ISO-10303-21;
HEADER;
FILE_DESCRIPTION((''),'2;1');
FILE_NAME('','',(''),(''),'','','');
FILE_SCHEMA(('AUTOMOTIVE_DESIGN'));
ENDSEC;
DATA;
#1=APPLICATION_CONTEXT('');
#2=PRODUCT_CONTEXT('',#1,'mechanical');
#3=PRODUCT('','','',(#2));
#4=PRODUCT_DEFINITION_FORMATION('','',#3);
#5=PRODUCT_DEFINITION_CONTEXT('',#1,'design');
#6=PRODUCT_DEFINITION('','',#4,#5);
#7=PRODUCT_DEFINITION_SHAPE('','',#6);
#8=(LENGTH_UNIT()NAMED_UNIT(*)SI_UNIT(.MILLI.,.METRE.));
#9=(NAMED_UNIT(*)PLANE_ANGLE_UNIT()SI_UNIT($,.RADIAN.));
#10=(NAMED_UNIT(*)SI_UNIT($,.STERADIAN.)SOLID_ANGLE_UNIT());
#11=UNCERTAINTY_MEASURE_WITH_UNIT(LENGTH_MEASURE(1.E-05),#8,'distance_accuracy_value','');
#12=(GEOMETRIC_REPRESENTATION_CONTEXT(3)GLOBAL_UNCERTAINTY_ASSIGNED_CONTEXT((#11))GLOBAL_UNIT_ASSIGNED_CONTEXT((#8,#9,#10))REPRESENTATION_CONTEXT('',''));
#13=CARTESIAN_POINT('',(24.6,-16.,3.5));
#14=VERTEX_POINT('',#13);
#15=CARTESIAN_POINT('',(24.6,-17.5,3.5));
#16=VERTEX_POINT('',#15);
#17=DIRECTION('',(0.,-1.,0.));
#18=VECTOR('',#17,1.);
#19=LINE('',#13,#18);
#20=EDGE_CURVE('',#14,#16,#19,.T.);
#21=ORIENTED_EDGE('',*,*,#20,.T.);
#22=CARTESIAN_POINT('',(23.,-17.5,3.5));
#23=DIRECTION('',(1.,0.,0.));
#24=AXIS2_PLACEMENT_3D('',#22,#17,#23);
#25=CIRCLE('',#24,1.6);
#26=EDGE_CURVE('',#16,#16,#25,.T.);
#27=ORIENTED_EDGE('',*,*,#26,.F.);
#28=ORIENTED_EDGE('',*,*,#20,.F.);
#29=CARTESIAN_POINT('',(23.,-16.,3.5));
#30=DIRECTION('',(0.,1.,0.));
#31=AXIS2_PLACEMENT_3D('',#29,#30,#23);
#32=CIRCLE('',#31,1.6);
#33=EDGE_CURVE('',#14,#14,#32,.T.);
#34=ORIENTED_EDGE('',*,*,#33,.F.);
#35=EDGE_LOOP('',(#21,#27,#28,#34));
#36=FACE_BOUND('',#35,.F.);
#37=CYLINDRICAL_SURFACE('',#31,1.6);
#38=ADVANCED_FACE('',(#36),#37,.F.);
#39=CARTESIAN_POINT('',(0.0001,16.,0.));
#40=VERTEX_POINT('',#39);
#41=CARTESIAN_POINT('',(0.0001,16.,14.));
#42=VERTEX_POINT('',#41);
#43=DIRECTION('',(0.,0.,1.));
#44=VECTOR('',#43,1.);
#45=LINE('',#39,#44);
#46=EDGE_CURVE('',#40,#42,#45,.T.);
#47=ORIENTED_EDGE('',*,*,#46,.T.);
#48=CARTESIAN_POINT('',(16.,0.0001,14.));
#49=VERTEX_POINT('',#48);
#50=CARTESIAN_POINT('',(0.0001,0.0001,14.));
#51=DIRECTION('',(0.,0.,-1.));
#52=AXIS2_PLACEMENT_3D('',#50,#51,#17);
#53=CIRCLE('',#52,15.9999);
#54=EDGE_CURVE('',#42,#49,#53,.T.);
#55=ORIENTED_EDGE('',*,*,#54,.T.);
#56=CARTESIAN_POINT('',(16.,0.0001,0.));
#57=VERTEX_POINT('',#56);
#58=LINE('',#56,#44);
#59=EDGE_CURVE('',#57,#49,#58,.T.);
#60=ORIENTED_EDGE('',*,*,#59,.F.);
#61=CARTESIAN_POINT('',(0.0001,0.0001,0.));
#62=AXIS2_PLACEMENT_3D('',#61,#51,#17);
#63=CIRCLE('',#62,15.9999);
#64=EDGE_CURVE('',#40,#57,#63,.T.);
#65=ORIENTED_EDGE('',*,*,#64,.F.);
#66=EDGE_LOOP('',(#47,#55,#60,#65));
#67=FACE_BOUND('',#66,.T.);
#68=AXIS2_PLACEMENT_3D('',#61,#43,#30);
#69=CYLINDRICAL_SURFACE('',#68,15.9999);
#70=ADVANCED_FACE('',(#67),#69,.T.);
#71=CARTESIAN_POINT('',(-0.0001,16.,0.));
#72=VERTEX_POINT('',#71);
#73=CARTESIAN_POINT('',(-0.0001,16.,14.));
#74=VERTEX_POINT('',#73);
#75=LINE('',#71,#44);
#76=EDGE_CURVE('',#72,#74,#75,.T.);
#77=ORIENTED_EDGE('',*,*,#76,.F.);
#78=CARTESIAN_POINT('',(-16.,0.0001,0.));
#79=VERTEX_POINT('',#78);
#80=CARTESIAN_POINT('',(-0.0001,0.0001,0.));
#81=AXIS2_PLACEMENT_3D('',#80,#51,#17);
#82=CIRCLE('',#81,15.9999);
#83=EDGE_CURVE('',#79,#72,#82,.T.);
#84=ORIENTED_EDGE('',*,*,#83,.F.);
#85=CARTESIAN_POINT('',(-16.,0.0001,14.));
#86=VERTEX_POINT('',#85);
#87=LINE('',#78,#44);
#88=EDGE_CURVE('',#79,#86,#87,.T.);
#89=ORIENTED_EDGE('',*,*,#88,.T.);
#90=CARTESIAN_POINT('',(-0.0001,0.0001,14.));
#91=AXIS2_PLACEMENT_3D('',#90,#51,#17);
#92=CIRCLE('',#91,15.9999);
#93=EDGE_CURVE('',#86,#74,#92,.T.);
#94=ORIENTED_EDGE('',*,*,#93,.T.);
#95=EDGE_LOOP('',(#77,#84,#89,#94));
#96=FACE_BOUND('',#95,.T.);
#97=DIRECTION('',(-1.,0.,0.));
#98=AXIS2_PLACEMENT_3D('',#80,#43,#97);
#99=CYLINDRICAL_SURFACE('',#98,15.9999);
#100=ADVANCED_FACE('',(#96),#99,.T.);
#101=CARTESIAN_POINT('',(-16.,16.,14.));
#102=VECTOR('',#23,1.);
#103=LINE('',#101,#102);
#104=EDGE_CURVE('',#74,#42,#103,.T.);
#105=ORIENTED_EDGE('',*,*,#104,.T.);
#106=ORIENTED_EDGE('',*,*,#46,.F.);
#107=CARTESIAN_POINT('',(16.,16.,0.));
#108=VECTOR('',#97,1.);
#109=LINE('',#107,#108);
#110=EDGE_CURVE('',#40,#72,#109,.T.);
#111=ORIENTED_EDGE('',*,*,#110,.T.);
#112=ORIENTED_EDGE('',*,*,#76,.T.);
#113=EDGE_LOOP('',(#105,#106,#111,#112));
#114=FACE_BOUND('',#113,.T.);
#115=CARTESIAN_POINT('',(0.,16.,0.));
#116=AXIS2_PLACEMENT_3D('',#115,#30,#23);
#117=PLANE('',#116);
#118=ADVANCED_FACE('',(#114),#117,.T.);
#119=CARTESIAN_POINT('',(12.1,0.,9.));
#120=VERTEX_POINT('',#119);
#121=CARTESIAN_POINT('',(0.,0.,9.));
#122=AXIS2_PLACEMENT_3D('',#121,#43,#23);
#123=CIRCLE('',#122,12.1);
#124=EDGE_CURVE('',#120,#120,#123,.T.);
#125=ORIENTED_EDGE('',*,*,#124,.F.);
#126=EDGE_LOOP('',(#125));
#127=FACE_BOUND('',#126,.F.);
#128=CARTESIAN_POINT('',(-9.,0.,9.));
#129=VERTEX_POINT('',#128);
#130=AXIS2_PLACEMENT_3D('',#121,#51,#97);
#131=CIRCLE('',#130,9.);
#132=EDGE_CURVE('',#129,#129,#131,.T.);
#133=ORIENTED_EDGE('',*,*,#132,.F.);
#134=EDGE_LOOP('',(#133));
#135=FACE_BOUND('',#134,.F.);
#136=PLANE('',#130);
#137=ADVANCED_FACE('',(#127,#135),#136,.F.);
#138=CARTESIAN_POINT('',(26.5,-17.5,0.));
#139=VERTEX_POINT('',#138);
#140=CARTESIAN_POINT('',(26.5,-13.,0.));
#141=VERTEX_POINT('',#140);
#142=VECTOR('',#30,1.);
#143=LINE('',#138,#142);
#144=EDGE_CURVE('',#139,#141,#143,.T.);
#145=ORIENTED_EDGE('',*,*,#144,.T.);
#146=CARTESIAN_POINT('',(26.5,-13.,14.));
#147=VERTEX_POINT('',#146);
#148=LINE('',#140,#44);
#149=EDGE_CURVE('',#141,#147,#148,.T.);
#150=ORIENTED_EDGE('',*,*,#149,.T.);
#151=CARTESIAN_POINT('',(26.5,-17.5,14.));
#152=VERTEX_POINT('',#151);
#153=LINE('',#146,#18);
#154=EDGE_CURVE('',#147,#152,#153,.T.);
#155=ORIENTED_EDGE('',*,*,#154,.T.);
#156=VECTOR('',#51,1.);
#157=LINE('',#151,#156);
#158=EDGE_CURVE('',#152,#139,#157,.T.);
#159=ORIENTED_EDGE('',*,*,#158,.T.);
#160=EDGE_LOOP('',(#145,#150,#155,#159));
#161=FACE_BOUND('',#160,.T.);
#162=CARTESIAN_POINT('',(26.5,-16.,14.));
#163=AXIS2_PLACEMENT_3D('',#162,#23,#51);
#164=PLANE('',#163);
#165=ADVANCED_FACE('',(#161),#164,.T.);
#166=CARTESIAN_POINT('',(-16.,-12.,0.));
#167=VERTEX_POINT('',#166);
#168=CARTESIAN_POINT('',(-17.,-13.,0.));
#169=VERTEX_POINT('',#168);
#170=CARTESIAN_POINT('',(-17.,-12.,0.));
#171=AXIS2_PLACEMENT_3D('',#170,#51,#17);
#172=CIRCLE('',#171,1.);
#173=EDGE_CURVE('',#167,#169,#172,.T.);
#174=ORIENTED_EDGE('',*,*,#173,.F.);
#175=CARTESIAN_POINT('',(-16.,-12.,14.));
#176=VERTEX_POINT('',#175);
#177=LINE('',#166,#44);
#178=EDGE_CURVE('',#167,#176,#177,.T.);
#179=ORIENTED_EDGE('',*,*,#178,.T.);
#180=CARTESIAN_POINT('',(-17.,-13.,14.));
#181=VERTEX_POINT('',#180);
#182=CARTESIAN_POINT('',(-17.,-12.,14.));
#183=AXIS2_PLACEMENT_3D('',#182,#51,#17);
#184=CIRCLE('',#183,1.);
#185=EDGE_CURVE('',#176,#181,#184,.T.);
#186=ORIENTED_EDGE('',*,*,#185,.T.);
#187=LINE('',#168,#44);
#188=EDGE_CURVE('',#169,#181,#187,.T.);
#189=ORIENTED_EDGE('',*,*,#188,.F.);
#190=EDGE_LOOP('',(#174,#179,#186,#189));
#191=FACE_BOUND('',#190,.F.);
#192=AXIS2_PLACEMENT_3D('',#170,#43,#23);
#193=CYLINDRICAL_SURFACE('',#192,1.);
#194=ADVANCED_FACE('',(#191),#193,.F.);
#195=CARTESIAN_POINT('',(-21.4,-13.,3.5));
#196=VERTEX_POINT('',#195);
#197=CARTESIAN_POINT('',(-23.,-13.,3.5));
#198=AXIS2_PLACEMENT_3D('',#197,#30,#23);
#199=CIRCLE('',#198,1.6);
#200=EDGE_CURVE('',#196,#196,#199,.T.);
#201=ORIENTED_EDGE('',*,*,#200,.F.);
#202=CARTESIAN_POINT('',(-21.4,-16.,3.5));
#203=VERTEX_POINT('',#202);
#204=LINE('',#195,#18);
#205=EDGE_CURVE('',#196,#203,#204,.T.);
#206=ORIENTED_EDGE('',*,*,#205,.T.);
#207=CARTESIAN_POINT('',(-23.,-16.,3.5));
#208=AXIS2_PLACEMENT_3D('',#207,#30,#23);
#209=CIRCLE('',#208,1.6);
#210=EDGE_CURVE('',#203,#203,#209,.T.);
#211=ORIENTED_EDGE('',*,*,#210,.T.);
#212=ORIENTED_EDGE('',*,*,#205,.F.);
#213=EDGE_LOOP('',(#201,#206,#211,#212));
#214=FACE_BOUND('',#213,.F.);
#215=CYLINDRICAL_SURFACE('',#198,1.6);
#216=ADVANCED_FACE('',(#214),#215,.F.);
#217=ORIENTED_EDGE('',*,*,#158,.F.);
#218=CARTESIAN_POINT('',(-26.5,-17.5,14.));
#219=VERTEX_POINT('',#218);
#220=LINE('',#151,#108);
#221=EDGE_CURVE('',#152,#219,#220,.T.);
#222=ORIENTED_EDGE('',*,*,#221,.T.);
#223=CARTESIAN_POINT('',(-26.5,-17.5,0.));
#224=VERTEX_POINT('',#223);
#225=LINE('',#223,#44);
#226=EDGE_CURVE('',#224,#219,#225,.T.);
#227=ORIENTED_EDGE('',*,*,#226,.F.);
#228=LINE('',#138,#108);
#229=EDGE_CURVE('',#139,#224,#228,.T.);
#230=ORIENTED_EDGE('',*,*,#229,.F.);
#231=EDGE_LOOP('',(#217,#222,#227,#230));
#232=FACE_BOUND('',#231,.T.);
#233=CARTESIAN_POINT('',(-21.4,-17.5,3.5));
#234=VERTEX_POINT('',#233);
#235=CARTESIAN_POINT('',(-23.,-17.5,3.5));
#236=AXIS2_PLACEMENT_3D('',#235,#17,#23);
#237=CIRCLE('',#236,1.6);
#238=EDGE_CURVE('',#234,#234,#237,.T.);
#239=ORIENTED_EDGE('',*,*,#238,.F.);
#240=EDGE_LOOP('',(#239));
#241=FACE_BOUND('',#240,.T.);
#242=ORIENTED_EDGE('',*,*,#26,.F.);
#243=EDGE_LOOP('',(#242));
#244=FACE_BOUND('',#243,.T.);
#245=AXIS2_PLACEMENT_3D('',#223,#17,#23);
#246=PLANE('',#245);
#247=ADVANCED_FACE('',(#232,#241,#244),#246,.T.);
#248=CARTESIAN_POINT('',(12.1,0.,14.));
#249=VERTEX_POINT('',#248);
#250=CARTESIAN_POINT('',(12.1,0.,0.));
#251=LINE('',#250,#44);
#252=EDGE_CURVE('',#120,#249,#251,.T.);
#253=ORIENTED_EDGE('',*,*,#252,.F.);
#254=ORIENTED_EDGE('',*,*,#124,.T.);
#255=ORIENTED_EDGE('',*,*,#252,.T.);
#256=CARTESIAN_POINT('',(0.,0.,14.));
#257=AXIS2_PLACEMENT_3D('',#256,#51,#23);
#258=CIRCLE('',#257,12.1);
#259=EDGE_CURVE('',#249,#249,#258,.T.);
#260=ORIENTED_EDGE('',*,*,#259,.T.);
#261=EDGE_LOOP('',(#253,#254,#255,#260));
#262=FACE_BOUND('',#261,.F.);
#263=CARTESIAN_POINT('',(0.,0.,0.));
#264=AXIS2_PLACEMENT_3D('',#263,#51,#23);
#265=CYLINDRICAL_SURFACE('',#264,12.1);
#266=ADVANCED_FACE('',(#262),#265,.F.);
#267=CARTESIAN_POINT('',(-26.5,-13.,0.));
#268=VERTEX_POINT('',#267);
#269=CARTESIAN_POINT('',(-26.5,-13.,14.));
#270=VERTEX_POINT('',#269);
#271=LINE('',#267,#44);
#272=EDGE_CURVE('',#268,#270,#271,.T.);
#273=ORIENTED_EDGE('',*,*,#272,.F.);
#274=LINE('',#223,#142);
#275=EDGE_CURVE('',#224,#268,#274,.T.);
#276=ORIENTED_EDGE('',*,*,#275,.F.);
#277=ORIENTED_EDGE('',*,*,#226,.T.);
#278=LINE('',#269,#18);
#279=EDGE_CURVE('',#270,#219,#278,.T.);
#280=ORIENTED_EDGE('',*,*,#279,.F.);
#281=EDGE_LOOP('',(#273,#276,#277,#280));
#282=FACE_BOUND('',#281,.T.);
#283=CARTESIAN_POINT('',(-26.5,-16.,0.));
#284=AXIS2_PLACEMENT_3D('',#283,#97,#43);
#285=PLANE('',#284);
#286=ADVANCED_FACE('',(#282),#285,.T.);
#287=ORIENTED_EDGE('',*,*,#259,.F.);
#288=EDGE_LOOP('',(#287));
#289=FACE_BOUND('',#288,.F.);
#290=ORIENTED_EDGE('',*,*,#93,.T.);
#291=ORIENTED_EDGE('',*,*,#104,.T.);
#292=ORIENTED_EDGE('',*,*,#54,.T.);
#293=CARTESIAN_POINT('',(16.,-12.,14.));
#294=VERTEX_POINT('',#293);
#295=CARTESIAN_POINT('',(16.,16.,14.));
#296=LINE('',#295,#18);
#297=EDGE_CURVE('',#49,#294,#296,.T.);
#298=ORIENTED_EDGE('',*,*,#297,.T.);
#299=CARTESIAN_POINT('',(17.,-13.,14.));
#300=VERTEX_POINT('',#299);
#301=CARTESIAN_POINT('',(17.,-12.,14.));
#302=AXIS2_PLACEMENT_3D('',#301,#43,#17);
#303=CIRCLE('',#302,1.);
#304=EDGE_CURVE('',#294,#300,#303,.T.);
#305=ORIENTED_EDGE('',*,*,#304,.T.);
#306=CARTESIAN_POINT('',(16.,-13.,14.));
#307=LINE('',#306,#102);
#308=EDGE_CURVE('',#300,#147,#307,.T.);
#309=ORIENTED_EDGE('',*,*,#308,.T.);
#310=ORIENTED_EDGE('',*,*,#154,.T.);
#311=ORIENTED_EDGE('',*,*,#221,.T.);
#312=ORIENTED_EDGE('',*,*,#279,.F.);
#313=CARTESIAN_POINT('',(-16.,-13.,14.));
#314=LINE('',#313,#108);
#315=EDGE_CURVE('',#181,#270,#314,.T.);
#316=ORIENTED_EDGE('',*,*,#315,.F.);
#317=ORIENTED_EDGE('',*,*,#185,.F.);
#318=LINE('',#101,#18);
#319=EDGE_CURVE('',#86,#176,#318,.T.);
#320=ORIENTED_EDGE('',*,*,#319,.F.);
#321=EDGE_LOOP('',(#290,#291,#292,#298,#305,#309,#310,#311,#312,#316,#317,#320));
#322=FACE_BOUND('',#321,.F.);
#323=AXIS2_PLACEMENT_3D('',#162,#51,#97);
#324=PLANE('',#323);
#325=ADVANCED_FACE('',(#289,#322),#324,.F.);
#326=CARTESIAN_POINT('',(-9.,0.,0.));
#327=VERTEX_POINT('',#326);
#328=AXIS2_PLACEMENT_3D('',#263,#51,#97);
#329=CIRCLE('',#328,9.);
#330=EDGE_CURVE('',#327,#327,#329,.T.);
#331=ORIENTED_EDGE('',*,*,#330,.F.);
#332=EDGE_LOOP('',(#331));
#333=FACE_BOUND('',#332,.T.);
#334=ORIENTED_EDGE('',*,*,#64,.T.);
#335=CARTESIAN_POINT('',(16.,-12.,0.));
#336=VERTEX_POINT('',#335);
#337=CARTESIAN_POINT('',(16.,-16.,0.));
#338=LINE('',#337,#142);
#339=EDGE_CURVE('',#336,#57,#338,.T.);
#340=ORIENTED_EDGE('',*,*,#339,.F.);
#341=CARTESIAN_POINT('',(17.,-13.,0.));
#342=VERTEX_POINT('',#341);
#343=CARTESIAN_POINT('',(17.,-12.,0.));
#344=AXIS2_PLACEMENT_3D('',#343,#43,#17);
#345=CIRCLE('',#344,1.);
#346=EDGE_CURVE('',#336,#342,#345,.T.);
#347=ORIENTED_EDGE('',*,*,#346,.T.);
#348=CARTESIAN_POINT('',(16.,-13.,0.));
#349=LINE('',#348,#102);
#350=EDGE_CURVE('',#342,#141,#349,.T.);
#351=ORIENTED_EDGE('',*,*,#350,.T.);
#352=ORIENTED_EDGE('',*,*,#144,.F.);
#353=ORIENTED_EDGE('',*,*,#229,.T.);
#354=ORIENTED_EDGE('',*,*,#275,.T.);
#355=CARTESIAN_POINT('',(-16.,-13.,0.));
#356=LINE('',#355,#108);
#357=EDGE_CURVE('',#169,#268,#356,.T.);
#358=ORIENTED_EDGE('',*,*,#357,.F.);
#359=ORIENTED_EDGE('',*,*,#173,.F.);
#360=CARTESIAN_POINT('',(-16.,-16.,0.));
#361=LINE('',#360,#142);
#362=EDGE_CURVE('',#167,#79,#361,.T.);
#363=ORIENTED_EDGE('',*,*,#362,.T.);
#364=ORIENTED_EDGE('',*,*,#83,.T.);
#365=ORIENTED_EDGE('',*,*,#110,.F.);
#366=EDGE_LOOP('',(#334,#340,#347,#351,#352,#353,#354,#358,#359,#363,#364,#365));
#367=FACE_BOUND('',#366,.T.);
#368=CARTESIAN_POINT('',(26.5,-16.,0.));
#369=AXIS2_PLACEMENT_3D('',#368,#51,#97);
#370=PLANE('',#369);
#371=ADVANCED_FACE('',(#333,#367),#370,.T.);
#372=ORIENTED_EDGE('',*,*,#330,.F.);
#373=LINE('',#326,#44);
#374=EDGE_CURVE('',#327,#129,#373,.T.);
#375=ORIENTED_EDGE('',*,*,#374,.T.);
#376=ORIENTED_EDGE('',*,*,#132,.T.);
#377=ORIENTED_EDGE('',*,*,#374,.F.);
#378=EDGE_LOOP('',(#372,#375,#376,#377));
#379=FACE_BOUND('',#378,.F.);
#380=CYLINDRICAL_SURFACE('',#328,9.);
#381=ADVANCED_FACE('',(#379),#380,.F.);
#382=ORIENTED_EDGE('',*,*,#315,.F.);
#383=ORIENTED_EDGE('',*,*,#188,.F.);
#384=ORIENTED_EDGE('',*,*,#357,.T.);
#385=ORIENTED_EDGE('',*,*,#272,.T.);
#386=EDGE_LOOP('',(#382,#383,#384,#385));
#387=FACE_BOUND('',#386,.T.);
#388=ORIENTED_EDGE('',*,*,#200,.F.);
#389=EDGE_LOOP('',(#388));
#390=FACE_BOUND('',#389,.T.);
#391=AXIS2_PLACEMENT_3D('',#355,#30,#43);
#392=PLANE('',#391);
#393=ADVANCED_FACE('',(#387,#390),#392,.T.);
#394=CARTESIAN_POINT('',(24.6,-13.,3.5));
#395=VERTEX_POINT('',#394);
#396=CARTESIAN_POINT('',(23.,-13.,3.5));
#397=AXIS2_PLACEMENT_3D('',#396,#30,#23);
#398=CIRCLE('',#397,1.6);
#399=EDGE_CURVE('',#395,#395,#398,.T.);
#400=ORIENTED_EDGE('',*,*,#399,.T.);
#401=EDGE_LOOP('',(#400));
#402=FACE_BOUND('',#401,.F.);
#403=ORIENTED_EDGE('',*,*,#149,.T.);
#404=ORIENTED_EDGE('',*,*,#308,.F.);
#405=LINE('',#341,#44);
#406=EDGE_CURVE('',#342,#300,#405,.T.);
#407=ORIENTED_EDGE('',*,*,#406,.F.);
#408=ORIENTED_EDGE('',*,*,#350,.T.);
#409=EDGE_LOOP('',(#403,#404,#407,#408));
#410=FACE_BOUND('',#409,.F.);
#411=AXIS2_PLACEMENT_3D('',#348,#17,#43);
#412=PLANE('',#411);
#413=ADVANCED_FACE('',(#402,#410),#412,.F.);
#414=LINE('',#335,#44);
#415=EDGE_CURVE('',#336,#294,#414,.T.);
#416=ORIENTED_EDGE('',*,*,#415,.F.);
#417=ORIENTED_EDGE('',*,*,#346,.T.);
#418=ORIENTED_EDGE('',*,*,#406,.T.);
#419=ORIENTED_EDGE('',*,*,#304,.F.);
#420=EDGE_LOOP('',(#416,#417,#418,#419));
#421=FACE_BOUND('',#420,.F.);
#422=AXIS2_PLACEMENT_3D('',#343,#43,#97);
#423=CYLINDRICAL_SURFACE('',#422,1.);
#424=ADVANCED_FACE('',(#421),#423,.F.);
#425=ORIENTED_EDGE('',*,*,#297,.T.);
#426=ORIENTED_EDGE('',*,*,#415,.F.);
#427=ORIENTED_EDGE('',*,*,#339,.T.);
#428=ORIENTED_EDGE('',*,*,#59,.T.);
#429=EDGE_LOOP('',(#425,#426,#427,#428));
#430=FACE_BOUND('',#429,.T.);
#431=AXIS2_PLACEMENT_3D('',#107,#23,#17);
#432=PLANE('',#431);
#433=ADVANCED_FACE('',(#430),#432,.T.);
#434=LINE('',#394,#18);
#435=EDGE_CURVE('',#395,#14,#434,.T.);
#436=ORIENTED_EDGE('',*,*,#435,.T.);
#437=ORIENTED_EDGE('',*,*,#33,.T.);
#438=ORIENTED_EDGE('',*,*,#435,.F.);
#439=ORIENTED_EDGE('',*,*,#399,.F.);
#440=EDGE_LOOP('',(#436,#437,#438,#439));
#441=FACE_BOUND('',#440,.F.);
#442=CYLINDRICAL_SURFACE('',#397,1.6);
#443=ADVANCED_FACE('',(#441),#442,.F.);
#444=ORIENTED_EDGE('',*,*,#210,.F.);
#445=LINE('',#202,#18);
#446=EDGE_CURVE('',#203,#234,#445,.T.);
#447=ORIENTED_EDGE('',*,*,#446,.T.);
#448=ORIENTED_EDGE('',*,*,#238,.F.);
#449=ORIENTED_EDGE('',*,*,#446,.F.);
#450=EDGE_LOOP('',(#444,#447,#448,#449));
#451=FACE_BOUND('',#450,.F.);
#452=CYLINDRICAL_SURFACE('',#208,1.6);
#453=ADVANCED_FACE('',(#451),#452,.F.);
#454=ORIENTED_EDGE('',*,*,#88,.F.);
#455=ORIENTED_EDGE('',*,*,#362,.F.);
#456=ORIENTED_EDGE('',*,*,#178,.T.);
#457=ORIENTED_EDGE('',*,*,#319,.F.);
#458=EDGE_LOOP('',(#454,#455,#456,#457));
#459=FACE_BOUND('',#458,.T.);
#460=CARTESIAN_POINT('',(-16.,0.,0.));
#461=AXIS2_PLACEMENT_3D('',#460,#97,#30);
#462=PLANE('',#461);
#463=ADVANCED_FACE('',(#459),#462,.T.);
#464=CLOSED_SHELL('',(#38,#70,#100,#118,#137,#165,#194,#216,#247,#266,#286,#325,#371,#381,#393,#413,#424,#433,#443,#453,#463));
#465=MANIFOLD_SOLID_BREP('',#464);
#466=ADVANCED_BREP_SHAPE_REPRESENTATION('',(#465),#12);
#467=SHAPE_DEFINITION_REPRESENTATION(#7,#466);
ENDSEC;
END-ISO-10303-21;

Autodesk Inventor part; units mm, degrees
ref_plane "YZ Plane" through (0, 0, 0) normal (1, 0, 0) x (0, 1, 0)
ref_plane "XZ Plane" through (0, 0, 0) normal (0, 1, 0) x (-1, 0, 0)
ref_plane "XY Plane" through (0, 0, 0) normal (0, 0, 1) x (1, 0, 0)
sketch "Skizze1" plane through (0, 0, 0) normal (0, 0, 1) x (1, 0, 0)
  line L0 (0, 22.4) -> (0, -22.4) projected
  line L1 (-22.4, 0) -> (22.4, 0) projected
  line L2 (-16, 16) -> (16, 16)
  line L3 (16, 16) -> (16, -16)
  line L4 (16, -16) -> (-16, -16)
  line L5 (-16, -16) -> (-16, 16)
  circle A0 centre (0, 0) radius 12.1
  dimension "d0" = 32
  dimension "d1" = 32
  dimension "d2" = 24.2
extrude "Extrusion1" add sketch "Skizze1" along normal blind 14 contours L2 L3 L1 A0 L0 | L0 A0 L1 L5 L2 | L1 L3 L4 L0 A0 | A0 L0 L4 L5 L1
sketch "Skizze2" plane through (16, -16, 0) normal (1, 0, 0) x (0, 0, -1)
  line L0 (-14, 32) -> (-14, 0) projected
  line L1 (0, 32) -> (0, 0) projected
  line L2 (-14, 0) -> (0, 0)
  line L3 (0, 0) -> (0, 3)
  line L4 (0, 3) -> (-14, 3)
  line L5 (-14, 3) -> (-14, 0)
  point P0 (0, 16)
  point P1 (-14, 3)
  dimension "d5" = 3
sketch "Skizze3" plane through (-16, -16, 0) normal (-1, 0, 0) x (0, 0, 1)
  line L0 (14, 32) -> (14, 0) projected
  line L1 (0, 32) -> (0, 0) projected
  line L2 (14, 0) -> (0, 0)
  line L3 (0, 0) -> (0, 3)
  line L4 (0, 3) -> (14, 3)
  line L5 (14, 3) -> (14, 0)
  point P0 (0, 16)
  point P1 (14, 3)
  dimension "d6" = 3
extrude "Extrusion2" add sketch "Skizze3" along normal blind 10.5
extrude "Extrusion3" add sketch "Skizze2" along normal blind 10.5
sketch "Skizze4" plane through (0, 0, 0) normal (0, 0, -1) x (-1, 0, 0)
  circle A0 centre (0, 0) radius 12.1
  circle A1 centre (0, 0) radius 12.1 projected
  circle A2 centre (0, 0) radius 9
  dimension "d11" = 24.2
  dimension "d12" = 18
extrude "Extrusion4" add sketch "Skizze4" against normal blind 9
fillet "Rundung1" radius 16 2 edges at (16, 16, 7) (-16, 16, 7)
sketch "Skizze5" plane through (16, -13, 14) normal (0, 1, 0) x (1, 0, 0)
  circle A0 centre (-39, 10.5) radius 1.6
  line L0 (-32, 14) -> (-42.5, 14) projected
  line L1 (-42.5, 0) -> (-42.5, 14) projected
  circle A1 centre (7, 10.5) radius 1.6
  line L2 (0, 14) -> (10.5, 14) projected
  line L3 (10.5, 14) -> (10.5, 0) projected
  point P0 (-16, 14)
  dimension "d16" = 3.2
  dimension "d17" = 3.5
  dimension "d18" = 3.5
  dimension "d19" = 3.2
  dimension "d20" = 3.5
  dimension "d21" = 3.5
extrude "Extrusion5" cut sketch "Skizze5" against normal up to surface (3 mm away)
fillet "Rundung2" radius 1 2 edges at (-16, -13, 7) (16, -13, 7)
sketch "Skizze6" plane through (-26.5, -16, 0) normal (0, -1, 0) x (1, 0, 0)
  line L0 (53, 14) -> (0, 14) projected
  line L1 (53, 14) -> (53, 0) projected
  line L2 (0, 14) -> (53, 14)
  line L3 (53, 14) -> (53, 0)
  line L4 (53, 0) -> (0, 0)
  line L5 (0, 0) -> (0, 14)
  circle A0 centre (3.5, 3.5) radius 1.6 projected
  circle A1 centre (3.5, 3.5) radius 1.6
  circle A2 centre (49.5, 3.5) radius 1.6 projected
  circle A3 centre (49.5, 3.5) radius 1.6
  point P0 (26.5, 0)
  dimension "d25" = 3.2
  dimension "d26" = 3.2
extrude "Extrusion6" add sketch "Skizze6" along normal blind 1.5
properties part number "_3D-Druck"
